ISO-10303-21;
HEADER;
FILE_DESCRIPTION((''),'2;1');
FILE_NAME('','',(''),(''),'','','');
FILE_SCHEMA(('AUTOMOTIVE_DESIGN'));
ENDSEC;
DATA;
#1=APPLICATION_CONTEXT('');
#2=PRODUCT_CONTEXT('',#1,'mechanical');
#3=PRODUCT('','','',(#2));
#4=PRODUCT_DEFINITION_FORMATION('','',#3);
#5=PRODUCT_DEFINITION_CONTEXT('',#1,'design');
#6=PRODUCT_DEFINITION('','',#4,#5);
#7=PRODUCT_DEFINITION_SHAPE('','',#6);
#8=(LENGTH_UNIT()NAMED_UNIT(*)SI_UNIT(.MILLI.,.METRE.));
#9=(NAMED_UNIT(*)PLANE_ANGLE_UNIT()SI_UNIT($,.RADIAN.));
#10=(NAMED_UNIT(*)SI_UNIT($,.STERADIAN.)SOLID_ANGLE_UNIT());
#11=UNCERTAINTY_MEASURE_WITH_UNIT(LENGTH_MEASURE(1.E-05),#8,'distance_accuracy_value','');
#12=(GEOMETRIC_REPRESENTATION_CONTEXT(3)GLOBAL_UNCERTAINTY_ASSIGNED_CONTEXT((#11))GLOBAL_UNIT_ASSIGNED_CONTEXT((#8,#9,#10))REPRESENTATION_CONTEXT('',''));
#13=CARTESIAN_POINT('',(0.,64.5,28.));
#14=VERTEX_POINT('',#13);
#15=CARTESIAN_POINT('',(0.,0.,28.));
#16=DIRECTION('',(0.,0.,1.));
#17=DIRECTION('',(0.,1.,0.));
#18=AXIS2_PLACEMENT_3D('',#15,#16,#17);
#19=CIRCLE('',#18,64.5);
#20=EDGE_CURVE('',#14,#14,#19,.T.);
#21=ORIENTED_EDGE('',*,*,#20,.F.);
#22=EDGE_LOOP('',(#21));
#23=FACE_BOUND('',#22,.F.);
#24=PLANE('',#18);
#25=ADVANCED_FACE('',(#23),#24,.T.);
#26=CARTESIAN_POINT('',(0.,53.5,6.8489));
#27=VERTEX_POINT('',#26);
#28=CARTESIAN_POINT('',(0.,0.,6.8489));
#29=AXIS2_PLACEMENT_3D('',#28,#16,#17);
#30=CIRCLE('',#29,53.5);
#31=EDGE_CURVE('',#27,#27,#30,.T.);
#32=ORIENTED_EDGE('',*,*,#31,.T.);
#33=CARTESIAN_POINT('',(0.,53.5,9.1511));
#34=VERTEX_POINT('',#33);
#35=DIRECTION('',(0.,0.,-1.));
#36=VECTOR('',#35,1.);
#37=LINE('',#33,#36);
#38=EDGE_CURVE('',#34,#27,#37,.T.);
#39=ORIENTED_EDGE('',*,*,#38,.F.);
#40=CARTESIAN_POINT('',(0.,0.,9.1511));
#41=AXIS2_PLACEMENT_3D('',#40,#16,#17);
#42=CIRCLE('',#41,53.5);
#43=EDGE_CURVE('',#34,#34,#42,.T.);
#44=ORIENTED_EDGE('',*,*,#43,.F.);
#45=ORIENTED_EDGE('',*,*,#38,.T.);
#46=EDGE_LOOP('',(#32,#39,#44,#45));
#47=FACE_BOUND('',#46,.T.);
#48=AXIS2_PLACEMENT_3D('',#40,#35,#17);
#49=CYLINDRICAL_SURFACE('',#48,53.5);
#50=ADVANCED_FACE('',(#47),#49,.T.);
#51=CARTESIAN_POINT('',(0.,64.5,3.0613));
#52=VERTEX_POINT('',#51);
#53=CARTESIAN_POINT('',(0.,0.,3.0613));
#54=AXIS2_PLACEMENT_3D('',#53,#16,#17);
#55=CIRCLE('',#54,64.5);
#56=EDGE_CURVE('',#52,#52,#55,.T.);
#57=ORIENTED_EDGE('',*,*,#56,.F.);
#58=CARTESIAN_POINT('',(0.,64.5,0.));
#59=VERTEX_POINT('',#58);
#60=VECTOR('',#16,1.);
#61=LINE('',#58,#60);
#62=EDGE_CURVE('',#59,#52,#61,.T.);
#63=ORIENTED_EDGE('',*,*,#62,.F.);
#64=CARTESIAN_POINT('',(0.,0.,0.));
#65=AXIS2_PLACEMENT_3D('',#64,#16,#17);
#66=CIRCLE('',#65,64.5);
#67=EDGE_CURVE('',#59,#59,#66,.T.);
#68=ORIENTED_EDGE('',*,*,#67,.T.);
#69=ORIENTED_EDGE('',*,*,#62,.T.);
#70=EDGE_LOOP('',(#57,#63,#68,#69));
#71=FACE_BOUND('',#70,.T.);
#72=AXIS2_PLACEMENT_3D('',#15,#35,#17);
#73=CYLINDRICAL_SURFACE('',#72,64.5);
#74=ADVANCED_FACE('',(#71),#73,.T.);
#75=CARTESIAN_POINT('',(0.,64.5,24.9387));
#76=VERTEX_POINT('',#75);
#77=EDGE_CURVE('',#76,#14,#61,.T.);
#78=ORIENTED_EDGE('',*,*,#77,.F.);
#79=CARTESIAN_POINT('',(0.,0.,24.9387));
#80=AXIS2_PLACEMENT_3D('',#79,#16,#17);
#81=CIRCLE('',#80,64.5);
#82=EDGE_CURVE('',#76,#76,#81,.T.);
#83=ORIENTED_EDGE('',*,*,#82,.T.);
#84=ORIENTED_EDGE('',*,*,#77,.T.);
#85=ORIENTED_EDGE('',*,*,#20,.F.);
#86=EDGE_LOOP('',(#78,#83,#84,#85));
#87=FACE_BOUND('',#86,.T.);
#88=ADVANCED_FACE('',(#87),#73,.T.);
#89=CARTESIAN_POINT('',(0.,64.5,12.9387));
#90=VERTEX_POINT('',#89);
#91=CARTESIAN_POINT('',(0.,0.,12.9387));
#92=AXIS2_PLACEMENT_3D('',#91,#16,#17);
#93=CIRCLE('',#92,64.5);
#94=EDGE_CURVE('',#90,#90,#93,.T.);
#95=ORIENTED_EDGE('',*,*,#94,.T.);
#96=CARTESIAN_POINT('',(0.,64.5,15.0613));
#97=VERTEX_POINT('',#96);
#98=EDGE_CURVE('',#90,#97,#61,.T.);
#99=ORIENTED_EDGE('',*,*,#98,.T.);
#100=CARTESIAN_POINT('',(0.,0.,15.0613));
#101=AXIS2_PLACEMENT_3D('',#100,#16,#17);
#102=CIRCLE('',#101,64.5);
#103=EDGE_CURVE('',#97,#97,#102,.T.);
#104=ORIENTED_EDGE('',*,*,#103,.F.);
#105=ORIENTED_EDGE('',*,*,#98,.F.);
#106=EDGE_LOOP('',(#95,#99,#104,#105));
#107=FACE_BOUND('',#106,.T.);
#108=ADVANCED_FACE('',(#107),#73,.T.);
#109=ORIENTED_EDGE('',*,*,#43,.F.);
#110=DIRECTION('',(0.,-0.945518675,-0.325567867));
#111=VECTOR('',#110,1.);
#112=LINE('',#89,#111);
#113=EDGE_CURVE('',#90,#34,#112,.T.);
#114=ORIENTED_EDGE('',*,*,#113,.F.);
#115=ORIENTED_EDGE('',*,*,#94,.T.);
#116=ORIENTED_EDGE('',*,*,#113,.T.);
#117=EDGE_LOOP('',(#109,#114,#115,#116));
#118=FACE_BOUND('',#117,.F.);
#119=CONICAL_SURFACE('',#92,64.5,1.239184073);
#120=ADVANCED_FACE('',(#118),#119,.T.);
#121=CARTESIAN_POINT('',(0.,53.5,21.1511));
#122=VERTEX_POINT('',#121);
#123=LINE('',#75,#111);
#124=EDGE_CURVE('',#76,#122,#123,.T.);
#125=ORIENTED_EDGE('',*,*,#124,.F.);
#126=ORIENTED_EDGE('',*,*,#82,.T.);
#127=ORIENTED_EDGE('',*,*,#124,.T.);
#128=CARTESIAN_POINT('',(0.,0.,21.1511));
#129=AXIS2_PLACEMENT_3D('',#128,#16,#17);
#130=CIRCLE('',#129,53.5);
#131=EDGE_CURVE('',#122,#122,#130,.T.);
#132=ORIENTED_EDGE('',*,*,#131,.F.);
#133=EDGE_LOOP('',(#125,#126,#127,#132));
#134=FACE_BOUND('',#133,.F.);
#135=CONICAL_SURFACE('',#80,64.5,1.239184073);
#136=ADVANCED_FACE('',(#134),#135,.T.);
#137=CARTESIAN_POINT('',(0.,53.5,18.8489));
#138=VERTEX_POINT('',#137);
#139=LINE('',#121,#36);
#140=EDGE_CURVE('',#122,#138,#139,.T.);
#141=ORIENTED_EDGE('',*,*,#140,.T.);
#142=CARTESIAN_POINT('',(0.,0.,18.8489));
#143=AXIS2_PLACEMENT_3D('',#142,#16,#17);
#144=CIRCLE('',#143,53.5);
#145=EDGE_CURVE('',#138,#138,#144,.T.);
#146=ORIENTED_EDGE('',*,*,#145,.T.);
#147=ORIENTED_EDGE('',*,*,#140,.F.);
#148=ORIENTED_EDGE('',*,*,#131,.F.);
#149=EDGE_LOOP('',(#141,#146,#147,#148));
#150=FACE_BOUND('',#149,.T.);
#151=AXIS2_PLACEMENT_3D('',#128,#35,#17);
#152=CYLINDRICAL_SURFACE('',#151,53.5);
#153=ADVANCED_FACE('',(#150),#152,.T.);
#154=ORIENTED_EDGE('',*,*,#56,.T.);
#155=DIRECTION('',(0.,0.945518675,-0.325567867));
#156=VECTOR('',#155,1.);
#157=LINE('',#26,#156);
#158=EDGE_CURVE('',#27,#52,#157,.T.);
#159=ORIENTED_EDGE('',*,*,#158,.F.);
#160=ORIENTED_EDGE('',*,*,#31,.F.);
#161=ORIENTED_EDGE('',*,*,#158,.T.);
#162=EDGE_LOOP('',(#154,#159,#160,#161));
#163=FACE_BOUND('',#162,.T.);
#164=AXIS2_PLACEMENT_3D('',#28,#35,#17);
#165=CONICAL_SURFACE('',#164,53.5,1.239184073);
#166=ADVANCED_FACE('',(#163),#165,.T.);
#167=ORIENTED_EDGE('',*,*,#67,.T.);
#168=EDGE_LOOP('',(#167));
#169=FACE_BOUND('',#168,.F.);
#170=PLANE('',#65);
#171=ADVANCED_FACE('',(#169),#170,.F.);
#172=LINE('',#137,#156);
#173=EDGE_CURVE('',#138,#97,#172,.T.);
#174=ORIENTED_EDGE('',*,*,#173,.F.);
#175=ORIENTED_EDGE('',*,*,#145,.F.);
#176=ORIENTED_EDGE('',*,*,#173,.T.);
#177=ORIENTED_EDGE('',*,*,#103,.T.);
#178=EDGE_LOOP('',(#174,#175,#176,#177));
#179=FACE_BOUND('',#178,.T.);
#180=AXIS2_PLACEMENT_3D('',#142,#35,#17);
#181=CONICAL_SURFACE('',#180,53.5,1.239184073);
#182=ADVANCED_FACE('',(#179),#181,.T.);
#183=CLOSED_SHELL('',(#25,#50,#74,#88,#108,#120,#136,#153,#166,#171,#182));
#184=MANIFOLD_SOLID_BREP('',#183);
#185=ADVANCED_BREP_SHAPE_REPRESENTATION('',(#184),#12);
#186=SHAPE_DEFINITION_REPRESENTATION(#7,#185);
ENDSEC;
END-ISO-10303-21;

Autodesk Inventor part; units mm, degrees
ref_plane "YZ Plane" through (0, 0, 0) normal (1, 0, 0) x (0, 1, 0)
ref_plane "XZ Plane" through (0, 0, 0) normal (0, 1, 0) x (-1, 0, 0)
sketch "Main Sketch" plane through (0, 0, 0) normal (1, 0, 0) x (0, 1, 0)
  line L0 (0, 28) -> (64.5, 28)
  line L1 (64.5, 28) -> (64.5, 12.9387)
  line L2 (64.5, 12.9387) -> (53.5, 9.1511)
  line L3 (53.5, 9.1511) -> (53.5, 6.8489)
  line L4 (53.5, 6.8489) -> (64.5, 3.0613)
  line L5 (64.5, 3.0613) -> (64.5, 0)
  line L6 (64.5, 0) -> (0, 0)
  line L7 (62.5, 12.25) -> (62.5, 3.75) construction
  line L8 (53.5, 8) -> (62.5, 8) construction
  line L9 (64.5, 12.9387) -> (64.5, 3.0613)
  line L10 (0, -4) -> (0, 24) projected
  line L11 (0, 0) -> (0, 28)
  dimension "d0" = 8.5
  dimension "d1" = 38
  dimension "d2" = 2
  dimension "d6" = 28
  dimension "d21" = 125
  dimension "d25" = 11
  dimension "d27" = 8
ref_plane "Belt Plane" through (0, 53.5, 8) normal (0, 0, 1) x (1, 0, 0)
revolve "Body" add sketch "Main Sketch" angle 360 about axis through (0, 0, -10) along (0, 0, 1)
revolve "Groove" cut sketch "Main Sketch" angle 360 about axis through (0, 0, -10) along (0, 0, 1) contours L9 L4 L3 L2
fillet "Fillet External" [suppressed]
fillet "Fillet Internal" [suppressed]
pattern_linear "Groove Pattern" count 2 spacing 12 along (0, 0, 1) of "Groove"
equation "\"d0\" = da_Bw"
equation "\"d1\" = da_Alfa"
equation "\"d2\" = da_c"
equation "\"d21\" = da_Dw"
equation "\"d25\" = da_Hd"
equation "\"d27\" = da_Se"
equation "\"da_r1\" = 0"
equation "\"da_r2\" = 0"
equation "\"d18\" = da_Sg"
equation "\"d5\" = da_Se"
equation "\"da_Bw\" = 8.5"
equation "\"da_Alfa\" = 38deg"
equation "\"da_c\" = 2"
equation "\"da_Dw\" = 125"
equation "\"da_Hd\" = 11"
equation "\"da_Se\" = 8"
equation "\"da_Sg\" = 12"
properties part number "Grooved Pulley1" material "Steel"
